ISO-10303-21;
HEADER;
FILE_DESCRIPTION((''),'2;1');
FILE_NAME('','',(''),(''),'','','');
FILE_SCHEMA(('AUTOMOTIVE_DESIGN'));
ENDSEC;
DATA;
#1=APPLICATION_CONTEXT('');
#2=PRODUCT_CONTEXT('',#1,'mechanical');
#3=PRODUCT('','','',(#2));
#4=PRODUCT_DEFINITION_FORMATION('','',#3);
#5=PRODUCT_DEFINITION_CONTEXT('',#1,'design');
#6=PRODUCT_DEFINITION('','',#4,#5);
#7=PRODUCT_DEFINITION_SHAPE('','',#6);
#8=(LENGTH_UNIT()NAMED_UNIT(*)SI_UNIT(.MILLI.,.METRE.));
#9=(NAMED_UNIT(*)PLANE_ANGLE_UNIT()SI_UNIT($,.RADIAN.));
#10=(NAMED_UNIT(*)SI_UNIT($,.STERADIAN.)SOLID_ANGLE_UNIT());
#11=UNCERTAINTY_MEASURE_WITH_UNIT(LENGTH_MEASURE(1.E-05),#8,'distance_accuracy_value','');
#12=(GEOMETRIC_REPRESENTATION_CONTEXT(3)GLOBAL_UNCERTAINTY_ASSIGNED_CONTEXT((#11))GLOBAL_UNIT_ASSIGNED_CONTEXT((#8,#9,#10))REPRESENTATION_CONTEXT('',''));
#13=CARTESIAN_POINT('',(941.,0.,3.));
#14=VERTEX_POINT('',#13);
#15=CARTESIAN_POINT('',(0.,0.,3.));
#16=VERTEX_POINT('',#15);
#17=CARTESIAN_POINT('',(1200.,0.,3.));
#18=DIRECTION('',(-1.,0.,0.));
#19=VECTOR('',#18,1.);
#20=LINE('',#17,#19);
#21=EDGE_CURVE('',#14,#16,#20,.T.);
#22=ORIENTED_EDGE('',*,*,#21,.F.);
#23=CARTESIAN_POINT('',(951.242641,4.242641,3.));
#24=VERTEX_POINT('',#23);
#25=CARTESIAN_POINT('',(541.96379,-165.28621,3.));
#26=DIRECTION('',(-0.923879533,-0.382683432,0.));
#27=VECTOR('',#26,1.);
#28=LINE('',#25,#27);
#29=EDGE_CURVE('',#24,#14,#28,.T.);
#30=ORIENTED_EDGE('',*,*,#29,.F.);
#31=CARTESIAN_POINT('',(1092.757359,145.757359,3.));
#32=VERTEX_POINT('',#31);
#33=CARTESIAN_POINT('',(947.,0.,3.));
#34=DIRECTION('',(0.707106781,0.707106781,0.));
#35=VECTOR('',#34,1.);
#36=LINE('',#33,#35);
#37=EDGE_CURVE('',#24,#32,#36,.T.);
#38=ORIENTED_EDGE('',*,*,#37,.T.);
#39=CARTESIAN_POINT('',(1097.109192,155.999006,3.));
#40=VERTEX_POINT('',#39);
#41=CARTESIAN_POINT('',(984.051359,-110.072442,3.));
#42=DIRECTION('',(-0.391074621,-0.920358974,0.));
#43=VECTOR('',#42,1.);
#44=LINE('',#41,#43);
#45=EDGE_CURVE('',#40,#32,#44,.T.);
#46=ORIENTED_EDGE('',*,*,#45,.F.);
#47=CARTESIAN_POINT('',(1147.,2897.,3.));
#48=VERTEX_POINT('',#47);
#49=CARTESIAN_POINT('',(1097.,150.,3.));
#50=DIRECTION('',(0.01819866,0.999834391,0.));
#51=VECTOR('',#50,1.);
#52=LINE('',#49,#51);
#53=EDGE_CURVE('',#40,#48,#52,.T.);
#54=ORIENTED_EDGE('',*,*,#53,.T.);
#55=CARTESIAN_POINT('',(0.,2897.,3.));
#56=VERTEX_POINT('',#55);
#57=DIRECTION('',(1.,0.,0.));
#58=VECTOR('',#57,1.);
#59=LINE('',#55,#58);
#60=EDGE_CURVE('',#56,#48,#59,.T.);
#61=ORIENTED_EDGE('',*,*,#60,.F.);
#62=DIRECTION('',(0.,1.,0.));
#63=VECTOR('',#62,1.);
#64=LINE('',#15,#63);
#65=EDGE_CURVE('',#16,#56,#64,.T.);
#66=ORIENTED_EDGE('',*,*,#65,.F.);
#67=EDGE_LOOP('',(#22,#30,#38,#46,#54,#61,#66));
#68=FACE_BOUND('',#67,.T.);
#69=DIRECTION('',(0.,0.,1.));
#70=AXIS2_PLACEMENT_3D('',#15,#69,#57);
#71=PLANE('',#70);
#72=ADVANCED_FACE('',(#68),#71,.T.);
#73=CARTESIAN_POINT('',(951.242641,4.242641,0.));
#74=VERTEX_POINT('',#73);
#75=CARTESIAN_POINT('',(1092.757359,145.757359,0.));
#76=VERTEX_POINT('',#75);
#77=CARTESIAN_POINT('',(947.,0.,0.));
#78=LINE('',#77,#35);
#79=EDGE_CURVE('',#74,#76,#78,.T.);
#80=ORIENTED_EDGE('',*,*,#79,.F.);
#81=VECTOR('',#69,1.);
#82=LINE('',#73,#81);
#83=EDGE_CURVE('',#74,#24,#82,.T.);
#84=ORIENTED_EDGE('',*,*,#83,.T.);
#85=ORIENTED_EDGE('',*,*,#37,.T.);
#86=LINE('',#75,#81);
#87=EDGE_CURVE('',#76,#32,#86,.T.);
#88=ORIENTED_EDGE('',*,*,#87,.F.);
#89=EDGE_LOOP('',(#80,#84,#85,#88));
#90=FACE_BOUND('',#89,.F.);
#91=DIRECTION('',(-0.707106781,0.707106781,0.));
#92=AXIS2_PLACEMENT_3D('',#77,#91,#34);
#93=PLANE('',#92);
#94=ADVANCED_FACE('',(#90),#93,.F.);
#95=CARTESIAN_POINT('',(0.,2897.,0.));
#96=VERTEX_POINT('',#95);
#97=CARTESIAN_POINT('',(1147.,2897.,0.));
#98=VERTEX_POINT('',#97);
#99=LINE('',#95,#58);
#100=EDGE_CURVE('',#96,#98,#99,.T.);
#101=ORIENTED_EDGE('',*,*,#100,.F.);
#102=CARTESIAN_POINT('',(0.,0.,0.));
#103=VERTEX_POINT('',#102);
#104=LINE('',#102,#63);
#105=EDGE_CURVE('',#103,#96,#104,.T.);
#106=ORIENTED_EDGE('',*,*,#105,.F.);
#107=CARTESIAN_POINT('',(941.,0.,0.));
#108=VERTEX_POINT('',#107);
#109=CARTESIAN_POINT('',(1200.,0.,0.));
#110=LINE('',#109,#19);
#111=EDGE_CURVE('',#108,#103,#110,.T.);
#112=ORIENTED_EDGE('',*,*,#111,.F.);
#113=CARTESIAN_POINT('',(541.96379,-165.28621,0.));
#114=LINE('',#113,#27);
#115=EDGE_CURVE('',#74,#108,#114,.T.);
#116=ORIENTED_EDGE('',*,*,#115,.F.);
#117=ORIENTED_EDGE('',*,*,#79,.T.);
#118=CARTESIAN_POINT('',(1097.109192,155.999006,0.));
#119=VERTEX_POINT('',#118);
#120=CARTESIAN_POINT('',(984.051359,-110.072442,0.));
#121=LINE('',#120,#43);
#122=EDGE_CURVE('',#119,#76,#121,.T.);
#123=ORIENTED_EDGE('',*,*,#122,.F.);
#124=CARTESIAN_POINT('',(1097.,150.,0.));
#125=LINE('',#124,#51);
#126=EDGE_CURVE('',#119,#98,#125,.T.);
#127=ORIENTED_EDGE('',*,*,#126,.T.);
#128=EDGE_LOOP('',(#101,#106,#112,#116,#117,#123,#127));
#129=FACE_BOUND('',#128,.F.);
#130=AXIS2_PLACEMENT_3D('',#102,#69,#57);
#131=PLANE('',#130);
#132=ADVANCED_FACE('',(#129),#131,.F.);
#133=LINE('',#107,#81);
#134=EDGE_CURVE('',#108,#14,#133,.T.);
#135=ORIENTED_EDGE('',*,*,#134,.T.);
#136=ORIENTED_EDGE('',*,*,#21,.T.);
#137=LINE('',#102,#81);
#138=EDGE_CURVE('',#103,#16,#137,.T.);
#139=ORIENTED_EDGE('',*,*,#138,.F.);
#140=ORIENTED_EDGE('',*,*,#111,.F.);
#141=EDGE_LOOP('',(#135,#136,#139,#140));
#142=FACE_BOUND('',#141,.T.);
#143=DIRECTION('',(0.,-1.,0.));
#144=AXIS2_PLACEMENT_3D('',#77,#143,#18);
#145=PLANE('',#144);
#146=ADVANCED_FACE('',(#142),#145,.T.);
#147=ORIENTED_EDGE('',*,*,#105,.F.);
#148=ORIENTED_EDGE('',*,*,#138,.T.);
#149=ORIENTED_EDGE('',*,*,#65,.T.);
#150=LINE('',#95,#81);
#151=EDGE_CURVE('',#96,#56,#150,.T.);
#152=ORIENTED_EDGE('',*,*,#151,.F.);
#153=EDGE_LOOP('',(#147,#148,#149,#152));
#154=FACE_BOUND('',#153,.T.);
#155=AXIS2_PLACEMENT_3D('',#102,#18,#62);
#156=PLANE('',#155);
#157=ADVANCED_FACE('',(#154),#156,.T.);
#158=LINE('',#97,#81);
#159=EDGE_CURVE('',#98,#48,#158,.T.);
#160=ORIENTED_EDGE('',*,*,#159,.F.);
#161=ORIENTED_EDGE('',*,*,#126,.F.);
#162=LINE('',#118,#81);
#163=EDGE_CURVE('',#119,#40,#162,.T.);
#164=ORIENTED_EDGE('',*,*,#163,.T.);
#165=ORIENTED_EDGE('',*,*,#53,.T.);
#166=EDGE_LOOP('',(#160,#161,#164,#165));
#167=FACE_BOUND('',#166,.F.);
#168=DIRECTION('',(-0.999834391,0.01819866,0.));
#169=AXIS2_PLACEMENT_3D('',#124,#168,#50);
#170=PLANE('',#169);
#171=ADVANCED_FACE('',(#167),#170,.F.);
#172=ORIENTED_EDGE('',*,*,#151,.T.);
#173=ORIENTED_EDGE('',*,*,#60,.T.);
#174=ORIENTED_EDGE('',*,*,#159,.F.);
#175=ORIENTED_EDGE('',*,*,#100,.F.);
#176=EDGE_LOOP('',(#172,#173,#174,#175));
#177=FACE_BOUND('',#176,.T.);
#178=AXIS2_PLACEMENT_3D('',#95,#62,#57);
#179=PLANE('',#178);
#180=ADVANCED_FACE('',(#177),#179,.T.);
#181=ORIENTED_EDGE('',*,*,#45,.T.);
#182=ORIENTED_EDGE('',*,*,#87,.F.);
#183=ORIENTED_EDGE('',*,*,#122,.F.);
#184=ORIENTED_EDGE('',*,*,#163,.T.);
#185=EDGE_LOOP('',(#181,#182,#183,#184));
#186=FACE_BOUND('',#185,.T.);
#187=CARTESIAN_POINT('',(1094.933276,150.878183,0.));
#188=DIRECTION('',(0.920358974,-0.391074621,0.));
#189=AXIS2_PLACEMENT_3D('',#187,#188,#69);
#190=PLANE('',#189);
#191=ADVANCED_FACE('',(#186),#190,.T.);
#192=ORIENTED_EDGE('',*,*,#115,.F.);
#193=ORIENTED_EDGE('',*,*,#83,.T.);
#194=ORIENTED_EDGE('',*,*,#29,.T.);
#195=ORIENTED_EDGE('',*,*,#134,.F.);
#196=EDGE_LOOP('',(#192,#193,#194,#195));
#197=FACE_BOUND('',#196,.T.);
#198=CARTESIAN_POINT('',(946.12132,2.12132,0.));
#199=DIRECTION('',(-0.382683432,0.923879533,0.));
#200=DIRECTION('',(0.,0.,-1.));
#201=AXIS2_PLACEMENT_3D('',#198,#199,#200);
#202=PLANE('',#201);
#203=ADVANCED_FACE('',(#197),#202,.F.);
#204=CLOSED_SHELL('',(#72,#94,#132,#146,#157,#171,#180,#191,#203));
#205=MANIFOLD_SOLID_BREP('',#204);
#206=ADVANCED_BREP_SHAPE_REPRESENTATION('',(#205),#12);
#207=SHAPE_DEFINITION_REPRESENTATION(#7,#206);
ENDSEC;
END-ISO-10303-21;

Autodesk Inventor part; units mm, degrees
ref_plane "YZ Plane" through (0, 0, 0) normal (1, 0, 0) x (0, 1, 0)
ref_plane "XZ Plane" through (0, 0, 0) normal (0, 1, 0) x (-1, 0, 0)
ref_plane "XY Plane" through (0, 0, 0) normal (0, 0, 1) x (1, 0, 0)
sketch "Sketch5" plane through (0, 0, 0) normal (0, 0, 1) x (1, 0, 0)
  line L0 (0, 2897) -> (1200, 2897)
  line L1 (1200, 2897) -> (1200, 0)
  line L2 (1200, 0) -> (0, 0)
  line L3 (0, 0) -> (0, 2897)
  line L4 (0, 2897) -> (1200, 0) construction
  line L5 (1200, 2897) -> (0, 0) construction
  line L6 (947, 0) -> (1097, 150)
  line L7 (1097, 150) -> (1147, 2897)
  point P0 (600, 1448.5)
  dimension "d26" = 1200
  dimension "d27" = 2897
  dimension "d29" = 53
  dimension "d30" = 947
  dimension "d31" = 150
  dimension "d32" = 103
extrude "Plate4" add sketch "Sketch5" along normal blind 3 contours L0 L7 L6 L2 L3
chamfer "Corner Chamfer1" distance 6 angle 45 2 edges at (947, 0, 1.5) (1097, 150, 1.5)
equation "\"d28\" = Thickness"
equation "\"BendReliefWidth\" = Thickness"
equation "\"BendReliefDepth\" = 0.5 * Thickness"
equation "\"CornerReliefSize\" = 4 * Thickness"
equation "\"MinimumRemnant\" = 2 * Thickness"
equation "\"TransitionRadius\" = BendRadius"
equation "\"JacobiRadiusSize\" = BendRadius"
equation "\"GapSize\" = Thickness"
equation "\"Thickness\" = 3"
equation "\"BendRadius\" = 5"
properties part number "BSH 061 butt end" material "09g2s"
